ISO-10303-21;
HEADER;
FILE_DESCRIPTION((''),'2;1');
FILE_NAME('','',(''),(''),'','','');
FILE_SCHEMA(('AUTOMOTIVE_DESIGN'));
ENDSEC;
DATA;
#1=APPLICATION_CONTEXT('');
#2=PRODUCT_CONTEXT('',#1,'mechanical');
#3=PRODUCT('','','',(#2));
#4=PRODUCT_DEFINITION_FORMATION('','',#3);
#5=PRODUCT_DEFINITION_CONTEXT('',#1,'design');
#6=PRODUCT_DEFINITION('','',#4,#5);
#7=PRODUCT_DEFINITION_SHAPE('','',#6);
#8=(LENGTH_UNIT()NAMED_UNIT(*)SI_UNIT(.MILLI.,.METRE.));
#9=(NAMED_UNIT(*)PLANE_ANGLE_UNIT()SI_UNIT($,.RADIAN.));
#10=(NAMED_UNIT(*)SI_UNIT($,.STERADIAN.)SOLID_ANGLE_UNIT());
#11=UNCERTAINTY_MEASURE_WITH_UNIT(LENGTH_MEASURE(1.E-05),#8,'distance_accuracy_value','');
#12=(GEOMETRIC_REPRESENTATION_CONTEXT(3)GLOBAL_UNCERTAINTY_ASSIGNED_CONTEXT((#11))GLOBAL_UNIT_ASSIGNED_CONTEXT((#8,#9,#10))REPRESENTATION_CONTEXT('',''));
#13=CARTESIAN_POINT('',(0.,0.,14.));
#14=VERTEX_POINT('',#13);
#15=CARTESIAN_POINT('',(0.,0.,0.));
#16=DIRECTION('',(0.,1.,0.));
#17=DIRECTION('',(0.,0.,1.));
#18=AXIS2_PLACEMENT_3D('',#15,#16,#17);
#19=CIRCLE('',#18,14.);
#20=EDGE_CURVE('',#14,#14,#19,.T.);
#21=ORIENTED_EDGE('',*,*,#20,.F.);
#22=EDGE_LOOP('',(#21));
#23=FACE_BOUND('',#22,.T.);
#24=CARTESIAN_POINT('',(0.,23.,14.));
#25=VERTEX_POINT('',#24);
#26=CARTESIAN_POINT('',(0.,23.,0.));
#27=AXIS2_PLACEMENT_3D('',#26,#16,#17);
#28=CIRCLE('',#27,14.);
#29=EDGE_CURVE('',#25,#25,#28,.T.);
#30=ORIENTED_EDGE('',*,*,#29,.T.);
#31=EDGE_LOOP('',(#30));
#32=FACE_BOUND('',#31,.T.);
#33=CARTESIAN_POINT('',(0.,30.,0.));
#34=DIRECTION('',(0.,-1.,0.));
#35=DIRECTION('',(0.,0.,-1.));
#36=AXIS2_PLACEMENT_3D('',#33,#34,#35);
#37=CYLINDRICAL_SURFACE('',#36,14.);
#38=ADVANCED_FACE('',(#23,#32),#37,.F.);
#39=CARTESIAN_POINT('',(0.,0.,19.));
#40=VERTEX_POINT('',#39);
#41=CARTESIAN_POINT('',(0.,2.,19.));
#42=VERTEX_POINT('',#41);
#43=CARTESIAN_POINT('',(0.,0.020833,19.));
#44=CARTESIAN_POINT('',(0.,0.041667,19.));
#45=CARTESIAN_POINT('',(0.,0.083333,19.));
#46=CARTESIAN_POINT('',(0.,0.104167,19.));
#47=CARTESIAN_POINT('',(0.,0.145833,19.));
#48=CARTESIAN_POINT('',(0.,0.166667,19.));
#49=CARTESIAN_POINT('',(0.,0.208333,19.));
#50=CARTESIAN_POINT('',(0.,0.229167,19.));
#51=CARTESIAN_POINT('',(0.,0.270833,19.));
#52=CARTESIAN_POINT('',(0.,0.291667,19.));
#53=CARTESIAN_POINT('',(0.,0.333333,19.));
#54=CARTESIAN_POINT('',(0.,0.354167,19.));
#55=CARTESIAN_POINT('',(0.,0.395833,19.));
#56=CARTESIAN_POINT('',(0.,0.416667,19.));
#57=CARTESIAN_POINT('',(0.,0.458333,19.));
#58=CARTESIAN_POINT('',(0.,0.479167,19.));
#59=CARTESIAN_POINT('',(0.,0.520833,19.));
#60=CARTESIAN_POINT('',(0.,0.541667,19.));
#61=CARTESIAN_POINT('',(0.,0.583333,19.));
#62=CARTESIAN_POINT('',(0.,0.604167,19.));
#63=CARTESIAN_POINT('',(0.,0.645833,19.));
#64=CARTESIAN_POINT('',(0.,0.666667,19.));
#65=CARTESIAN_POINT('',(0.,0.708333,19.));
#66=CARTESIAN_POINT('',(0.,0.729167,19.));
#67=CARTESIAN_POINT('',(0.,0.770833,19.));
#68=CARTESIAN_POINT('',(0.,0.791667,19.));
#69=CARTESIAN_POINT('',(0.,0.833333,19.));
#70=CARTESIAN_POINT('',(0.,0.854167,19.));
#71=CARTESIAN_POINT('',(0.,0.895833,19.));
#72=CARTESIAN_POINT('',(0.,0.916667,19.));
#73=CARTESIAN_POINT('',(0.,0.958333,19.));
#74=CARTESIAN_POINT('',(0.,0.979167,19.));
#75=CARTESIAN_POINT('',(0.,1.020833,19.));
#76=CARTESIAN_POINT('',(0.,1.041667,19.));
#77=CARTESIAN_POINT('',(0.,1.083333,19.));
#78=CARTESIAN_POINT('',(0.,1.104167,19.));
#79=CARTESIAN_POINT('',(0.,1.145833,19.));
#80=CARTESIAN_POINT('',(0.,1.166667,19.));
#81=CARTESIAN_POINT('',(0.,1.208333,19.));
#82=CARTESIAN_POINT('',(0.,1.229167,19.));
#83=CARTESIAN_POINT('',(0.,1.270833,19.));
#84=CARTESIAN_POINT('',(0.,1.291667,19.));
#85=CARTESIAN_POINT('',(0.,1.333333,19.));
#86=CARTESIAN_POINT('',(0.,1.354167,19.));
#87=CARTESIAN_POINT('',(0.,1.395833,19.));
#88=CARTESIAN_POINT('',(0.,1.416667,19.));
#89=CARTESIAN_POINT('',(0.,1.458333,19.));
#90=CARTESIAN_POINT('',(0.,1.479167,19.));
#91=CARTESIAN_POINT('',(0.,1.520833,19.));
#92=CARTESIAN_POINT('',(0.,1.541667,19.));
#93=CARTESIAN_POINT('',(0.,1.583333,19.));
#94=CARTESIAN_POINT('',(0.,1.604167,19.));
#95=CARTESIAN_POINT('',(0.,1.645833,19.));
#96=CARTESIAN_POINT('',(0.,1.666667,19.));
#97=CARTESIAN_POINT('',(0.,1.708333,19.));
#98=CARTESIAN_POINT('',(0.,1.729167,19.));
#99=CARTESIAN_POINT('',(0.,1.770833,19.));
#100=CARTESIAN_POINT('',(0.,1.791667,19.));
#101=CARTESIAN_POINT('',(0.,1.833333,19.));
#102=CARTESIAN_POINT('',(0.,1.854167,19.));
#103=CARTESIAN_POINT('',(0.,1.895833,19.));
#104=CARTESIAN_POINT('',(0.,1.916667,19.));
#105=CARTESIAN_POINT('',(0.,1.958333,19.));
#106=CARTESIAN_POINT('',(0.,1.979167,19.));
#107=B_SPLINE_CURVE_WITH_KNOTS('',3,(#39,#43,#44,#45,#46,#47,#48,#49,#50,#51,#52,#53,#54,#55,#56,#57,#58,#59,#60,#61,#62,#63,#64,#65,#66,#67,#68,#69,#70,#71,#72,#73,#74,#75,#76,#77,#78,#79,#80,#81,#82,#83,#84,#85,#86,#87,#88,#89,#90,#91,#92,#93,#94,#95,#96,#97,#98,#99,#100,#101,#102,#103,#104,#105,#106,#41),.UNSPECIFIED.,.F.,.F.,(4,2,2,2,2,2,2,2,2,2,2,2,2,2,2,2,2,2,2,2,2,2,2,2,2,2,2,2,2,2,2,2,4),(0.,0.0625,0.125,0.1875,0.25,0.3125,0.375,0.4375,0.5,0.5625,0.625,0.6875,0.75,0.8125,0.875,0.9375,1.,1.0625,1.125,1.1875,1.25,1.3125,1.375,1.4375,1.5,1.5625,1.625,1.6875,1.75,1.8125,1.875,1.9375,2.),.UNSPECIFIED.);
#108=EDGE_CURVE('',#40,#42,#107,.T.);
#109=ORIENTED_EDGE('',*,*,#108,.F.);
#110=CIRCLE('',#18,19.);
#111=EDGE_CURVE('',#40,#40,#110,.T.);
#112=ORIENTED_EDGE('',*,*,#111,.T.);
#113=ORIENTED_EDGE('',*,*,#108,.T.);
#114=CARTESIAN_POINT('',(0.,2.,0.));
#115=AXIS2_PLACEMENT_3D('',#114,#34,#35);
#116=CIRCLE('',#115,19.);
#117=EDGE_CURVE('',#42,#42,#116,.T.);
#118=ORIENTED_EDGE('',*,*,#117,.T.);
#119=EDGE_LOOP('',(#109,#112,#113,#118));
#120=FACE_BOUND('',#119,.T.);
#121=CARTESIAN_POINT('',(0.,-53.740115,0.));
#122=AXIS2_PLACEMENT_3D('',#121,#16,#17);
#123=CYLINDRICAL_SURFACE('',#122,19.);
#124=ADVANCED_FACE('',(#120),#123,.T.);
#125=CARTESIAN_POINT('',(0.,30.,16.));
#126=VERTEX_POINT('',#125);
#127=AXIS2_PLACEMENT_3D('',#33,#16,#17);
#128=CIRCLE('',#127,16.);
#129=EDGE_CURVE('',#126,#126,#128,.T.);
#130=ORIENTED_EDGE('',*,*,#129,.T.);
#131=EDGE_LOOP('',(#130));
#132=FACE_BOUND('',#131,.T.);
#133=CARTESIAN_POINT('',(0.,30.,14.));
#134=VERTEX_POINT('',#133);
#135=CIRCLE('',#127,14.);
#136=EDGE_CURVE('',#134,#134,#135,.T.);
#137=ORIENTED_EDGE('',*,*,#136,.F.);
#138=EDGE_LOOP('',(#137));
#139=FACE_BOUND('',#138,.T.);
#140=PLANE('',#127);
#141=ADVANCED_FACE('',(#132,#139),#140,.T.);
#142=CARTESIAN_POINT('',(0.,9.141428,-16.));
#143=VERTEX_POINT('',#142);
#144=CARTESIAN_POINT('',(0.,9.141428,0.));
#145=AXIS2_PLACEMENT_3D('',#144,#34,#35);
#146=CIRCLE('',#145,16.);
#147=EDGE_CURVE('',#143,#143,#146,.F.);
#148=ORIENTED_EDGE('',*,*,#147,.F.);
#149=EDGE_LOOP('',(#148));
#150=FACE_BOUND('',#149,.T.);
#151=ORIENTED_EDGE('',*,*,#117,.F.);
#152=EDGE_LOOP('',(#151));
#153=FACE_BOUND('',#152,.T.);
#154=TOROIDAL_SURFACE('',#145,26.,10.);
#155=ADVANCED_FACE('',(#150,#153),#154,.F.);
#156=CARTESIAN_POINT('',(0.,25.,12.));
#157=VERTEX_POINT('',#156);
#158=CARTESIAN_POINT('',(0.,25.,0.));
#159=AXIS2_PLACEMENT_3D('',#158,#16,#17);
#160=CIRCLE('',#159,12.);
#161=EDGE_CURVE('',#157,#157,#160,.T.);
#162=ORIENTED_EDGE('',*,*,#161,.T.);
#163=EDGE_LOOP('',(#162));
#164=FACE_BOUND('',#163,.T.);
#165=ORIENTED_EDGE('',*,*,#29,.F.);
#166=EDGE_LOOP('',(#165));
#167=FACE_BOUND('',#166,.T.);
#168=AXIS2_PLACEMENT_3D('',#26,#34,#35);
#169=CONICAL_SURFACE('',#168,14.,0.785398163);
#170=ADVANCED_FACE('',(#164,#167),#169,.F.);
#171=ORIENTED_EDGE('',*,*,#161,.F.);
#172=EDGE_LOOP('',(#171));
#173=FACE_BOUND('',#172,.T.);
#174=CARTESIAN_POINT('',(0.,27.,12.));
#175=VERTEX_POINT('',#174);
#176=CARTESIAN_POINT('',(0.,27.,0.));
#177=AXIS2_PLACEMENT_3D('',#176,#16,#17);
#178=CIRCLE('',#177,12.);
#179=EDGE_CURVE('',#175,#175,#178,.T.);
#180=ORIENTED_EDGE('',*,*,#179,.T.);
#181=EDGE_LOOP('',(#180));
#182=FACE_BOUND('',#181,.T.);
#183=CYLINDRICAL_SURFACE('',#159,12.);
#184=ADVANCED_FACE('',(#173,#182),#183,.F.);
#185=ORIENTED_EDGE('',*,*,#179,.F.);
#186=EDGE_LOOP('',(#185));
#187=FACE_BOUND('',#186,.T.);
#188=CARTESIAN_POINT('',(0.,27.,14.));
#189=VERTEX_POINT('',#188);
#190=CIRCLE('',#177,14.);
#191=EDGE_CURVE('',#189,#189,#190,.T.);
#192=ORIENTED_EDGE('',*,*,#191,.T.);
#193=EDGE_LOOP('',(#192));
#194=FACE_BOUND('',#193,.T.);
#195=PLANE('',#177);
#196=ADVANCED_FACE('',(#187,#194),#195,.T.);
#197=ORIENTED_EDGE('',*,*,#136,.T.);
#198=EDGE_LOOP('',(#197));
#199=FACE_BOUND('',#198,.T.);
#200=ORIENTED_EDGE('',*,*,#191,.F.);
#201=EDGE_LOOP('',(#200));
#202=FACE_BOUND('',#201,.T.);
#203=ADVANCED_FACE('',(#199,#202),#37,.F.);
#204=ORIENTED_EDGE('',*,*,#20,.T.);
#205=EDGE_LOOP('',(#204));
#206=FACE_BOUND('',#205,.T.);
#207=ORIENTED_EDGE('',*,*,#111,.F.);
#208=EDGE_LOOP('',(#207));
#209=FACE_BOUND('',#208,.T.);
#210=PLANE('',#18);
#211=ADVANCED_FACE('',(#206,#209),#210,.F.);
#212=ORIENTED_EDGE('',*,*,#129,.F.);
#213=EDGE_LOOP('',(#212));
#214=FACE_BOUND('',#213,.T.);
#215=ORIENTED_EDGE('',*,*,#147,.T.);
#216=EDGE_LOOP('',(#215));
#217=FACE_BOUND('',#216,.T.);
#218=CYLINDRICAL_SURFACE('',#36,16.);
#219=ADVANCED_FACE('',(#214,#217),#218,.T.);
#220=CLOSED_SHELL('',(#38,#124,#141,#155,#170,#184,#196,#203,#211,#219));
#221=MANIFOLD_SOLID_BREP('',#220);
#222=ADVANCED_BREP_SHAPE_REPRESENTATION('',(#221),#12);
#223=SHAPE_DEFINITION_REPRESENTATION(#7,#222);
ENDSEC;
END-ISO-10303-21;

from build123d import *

# Parameters (mm, degrees)
SKETCH1_R           = 16
SKETCH1_R_2         = 14
BOSS_EXTRUDE1_DEPTH = 30
BOSS_EXTRUDE3_START = -2
SKETCH3_R           = 14
SKETCH3_R_2         = 12
BOSS_EXTRUDE3_DEPTH = 2
CHAMFER1_SIZE       = 2
BOSS_EXTRUDE4_START = 2
SKETCH4_R           = 19
SKETCH4_R_2         = 16
BOSS_EXTRUDE4_DEPTH = 2
FILLET2_R           = 10


# Some blends are built 0.0001 mm under size
with BuildPart() as part:
    # Sketch1 → Boss-Extrude1 (new body)
    with BuildSketch(Plane(origin=(0, 0, 0), x_dir=(1, 0, 0), z_dir=(0, 1, 0))):
        with Locations(Location((0, 0, 0), (0, 0, 270))):
            Circle(SKETCH1_R)
        with Locations(Location((0, 0, 0), (0, 0, 270))):
            Circle(SKETCH1_R_2, mode=Mode.SUBTRACT)
    extrude(amount=BOSS_EXTRUDE1_DEPTH)

    # Sketch3 → Boss-Extrude3 (add)
    with BuildSketch(Plane(origin=(0, 27, 0), x_dir=(1, 0, 0), z_dir=(0, 1, 0)).offset(BOSS_EXTRUDE3_START)):
        with Locations(Location((0, 0, 0), (0, 0, 270))):
            Circle(SKETCH3_R)
        with Locations(Location((0, 0, 0), (0, 0, 270))):
            Circle(SKETCH3_R_2, mode=Mode.SUBTRACT)
    extrude(amount=BOSS_EXTRUDE3_DEPTH)

    # Chamfer1
    chamfer1_edges = [part.edges().sort_by_distance(p)[0] for p in [
        (0, 25, -14),
    ]]
    chamfer(chamfer1_edges, length=CHAMFER1_SIZE - 0.0001)  # a hair under: the kernel refuses the full size

    # Sketch4 → Boss-Extrude4 (add)
    with BuildSketch(Plane(origin=(0, 2, 0), x_dir=(-1, 0, 0), z_dir=(0, -1, 0)).offset(BOSS_EXTRUDE4_START)):
        with Locations(Location((0, 0, 0), (0, 0, 270))):
            Circle(SKETCH4_R)
        with Locations(Location((0, 0, 0), (0, 0, 90))):
            Circle(SKETCH4_R_2, mode=Mode.SUBTRACT)
    extrude(amount=-BOSS_EXTRUDE4_DEPTH)

    # Fillet2
    # the kernel refuses this fillet: 10 mm, written as the material it adds along each edge
    with BuildSketch(Plane(origin=(0, 2, 0), x_dir=(0, 0, 1), z_dir=(1, 0, 0))) as fillet2_piece_1:
        with BuildLine():
            CenterArc((26, -7.141428429), FILLET2_R, 134.427004001, 45.572995999)
            Line((16, -7.141428429), (15.8, -7.141428429))
            Line((15.8, -7.141428429), (15.8, 0))
            Line((15.8, 0), (16, 0.2))
            ThreePointArc((16, 0.2), (17.5, 0.2), (18.86, 0.142828569))
            Line((18.86, 0.142828569), (19, 0))
        make_face()
    revolve(axis=Axis((0, 2, 0), (0, -1, 0)))


solid = part.part
